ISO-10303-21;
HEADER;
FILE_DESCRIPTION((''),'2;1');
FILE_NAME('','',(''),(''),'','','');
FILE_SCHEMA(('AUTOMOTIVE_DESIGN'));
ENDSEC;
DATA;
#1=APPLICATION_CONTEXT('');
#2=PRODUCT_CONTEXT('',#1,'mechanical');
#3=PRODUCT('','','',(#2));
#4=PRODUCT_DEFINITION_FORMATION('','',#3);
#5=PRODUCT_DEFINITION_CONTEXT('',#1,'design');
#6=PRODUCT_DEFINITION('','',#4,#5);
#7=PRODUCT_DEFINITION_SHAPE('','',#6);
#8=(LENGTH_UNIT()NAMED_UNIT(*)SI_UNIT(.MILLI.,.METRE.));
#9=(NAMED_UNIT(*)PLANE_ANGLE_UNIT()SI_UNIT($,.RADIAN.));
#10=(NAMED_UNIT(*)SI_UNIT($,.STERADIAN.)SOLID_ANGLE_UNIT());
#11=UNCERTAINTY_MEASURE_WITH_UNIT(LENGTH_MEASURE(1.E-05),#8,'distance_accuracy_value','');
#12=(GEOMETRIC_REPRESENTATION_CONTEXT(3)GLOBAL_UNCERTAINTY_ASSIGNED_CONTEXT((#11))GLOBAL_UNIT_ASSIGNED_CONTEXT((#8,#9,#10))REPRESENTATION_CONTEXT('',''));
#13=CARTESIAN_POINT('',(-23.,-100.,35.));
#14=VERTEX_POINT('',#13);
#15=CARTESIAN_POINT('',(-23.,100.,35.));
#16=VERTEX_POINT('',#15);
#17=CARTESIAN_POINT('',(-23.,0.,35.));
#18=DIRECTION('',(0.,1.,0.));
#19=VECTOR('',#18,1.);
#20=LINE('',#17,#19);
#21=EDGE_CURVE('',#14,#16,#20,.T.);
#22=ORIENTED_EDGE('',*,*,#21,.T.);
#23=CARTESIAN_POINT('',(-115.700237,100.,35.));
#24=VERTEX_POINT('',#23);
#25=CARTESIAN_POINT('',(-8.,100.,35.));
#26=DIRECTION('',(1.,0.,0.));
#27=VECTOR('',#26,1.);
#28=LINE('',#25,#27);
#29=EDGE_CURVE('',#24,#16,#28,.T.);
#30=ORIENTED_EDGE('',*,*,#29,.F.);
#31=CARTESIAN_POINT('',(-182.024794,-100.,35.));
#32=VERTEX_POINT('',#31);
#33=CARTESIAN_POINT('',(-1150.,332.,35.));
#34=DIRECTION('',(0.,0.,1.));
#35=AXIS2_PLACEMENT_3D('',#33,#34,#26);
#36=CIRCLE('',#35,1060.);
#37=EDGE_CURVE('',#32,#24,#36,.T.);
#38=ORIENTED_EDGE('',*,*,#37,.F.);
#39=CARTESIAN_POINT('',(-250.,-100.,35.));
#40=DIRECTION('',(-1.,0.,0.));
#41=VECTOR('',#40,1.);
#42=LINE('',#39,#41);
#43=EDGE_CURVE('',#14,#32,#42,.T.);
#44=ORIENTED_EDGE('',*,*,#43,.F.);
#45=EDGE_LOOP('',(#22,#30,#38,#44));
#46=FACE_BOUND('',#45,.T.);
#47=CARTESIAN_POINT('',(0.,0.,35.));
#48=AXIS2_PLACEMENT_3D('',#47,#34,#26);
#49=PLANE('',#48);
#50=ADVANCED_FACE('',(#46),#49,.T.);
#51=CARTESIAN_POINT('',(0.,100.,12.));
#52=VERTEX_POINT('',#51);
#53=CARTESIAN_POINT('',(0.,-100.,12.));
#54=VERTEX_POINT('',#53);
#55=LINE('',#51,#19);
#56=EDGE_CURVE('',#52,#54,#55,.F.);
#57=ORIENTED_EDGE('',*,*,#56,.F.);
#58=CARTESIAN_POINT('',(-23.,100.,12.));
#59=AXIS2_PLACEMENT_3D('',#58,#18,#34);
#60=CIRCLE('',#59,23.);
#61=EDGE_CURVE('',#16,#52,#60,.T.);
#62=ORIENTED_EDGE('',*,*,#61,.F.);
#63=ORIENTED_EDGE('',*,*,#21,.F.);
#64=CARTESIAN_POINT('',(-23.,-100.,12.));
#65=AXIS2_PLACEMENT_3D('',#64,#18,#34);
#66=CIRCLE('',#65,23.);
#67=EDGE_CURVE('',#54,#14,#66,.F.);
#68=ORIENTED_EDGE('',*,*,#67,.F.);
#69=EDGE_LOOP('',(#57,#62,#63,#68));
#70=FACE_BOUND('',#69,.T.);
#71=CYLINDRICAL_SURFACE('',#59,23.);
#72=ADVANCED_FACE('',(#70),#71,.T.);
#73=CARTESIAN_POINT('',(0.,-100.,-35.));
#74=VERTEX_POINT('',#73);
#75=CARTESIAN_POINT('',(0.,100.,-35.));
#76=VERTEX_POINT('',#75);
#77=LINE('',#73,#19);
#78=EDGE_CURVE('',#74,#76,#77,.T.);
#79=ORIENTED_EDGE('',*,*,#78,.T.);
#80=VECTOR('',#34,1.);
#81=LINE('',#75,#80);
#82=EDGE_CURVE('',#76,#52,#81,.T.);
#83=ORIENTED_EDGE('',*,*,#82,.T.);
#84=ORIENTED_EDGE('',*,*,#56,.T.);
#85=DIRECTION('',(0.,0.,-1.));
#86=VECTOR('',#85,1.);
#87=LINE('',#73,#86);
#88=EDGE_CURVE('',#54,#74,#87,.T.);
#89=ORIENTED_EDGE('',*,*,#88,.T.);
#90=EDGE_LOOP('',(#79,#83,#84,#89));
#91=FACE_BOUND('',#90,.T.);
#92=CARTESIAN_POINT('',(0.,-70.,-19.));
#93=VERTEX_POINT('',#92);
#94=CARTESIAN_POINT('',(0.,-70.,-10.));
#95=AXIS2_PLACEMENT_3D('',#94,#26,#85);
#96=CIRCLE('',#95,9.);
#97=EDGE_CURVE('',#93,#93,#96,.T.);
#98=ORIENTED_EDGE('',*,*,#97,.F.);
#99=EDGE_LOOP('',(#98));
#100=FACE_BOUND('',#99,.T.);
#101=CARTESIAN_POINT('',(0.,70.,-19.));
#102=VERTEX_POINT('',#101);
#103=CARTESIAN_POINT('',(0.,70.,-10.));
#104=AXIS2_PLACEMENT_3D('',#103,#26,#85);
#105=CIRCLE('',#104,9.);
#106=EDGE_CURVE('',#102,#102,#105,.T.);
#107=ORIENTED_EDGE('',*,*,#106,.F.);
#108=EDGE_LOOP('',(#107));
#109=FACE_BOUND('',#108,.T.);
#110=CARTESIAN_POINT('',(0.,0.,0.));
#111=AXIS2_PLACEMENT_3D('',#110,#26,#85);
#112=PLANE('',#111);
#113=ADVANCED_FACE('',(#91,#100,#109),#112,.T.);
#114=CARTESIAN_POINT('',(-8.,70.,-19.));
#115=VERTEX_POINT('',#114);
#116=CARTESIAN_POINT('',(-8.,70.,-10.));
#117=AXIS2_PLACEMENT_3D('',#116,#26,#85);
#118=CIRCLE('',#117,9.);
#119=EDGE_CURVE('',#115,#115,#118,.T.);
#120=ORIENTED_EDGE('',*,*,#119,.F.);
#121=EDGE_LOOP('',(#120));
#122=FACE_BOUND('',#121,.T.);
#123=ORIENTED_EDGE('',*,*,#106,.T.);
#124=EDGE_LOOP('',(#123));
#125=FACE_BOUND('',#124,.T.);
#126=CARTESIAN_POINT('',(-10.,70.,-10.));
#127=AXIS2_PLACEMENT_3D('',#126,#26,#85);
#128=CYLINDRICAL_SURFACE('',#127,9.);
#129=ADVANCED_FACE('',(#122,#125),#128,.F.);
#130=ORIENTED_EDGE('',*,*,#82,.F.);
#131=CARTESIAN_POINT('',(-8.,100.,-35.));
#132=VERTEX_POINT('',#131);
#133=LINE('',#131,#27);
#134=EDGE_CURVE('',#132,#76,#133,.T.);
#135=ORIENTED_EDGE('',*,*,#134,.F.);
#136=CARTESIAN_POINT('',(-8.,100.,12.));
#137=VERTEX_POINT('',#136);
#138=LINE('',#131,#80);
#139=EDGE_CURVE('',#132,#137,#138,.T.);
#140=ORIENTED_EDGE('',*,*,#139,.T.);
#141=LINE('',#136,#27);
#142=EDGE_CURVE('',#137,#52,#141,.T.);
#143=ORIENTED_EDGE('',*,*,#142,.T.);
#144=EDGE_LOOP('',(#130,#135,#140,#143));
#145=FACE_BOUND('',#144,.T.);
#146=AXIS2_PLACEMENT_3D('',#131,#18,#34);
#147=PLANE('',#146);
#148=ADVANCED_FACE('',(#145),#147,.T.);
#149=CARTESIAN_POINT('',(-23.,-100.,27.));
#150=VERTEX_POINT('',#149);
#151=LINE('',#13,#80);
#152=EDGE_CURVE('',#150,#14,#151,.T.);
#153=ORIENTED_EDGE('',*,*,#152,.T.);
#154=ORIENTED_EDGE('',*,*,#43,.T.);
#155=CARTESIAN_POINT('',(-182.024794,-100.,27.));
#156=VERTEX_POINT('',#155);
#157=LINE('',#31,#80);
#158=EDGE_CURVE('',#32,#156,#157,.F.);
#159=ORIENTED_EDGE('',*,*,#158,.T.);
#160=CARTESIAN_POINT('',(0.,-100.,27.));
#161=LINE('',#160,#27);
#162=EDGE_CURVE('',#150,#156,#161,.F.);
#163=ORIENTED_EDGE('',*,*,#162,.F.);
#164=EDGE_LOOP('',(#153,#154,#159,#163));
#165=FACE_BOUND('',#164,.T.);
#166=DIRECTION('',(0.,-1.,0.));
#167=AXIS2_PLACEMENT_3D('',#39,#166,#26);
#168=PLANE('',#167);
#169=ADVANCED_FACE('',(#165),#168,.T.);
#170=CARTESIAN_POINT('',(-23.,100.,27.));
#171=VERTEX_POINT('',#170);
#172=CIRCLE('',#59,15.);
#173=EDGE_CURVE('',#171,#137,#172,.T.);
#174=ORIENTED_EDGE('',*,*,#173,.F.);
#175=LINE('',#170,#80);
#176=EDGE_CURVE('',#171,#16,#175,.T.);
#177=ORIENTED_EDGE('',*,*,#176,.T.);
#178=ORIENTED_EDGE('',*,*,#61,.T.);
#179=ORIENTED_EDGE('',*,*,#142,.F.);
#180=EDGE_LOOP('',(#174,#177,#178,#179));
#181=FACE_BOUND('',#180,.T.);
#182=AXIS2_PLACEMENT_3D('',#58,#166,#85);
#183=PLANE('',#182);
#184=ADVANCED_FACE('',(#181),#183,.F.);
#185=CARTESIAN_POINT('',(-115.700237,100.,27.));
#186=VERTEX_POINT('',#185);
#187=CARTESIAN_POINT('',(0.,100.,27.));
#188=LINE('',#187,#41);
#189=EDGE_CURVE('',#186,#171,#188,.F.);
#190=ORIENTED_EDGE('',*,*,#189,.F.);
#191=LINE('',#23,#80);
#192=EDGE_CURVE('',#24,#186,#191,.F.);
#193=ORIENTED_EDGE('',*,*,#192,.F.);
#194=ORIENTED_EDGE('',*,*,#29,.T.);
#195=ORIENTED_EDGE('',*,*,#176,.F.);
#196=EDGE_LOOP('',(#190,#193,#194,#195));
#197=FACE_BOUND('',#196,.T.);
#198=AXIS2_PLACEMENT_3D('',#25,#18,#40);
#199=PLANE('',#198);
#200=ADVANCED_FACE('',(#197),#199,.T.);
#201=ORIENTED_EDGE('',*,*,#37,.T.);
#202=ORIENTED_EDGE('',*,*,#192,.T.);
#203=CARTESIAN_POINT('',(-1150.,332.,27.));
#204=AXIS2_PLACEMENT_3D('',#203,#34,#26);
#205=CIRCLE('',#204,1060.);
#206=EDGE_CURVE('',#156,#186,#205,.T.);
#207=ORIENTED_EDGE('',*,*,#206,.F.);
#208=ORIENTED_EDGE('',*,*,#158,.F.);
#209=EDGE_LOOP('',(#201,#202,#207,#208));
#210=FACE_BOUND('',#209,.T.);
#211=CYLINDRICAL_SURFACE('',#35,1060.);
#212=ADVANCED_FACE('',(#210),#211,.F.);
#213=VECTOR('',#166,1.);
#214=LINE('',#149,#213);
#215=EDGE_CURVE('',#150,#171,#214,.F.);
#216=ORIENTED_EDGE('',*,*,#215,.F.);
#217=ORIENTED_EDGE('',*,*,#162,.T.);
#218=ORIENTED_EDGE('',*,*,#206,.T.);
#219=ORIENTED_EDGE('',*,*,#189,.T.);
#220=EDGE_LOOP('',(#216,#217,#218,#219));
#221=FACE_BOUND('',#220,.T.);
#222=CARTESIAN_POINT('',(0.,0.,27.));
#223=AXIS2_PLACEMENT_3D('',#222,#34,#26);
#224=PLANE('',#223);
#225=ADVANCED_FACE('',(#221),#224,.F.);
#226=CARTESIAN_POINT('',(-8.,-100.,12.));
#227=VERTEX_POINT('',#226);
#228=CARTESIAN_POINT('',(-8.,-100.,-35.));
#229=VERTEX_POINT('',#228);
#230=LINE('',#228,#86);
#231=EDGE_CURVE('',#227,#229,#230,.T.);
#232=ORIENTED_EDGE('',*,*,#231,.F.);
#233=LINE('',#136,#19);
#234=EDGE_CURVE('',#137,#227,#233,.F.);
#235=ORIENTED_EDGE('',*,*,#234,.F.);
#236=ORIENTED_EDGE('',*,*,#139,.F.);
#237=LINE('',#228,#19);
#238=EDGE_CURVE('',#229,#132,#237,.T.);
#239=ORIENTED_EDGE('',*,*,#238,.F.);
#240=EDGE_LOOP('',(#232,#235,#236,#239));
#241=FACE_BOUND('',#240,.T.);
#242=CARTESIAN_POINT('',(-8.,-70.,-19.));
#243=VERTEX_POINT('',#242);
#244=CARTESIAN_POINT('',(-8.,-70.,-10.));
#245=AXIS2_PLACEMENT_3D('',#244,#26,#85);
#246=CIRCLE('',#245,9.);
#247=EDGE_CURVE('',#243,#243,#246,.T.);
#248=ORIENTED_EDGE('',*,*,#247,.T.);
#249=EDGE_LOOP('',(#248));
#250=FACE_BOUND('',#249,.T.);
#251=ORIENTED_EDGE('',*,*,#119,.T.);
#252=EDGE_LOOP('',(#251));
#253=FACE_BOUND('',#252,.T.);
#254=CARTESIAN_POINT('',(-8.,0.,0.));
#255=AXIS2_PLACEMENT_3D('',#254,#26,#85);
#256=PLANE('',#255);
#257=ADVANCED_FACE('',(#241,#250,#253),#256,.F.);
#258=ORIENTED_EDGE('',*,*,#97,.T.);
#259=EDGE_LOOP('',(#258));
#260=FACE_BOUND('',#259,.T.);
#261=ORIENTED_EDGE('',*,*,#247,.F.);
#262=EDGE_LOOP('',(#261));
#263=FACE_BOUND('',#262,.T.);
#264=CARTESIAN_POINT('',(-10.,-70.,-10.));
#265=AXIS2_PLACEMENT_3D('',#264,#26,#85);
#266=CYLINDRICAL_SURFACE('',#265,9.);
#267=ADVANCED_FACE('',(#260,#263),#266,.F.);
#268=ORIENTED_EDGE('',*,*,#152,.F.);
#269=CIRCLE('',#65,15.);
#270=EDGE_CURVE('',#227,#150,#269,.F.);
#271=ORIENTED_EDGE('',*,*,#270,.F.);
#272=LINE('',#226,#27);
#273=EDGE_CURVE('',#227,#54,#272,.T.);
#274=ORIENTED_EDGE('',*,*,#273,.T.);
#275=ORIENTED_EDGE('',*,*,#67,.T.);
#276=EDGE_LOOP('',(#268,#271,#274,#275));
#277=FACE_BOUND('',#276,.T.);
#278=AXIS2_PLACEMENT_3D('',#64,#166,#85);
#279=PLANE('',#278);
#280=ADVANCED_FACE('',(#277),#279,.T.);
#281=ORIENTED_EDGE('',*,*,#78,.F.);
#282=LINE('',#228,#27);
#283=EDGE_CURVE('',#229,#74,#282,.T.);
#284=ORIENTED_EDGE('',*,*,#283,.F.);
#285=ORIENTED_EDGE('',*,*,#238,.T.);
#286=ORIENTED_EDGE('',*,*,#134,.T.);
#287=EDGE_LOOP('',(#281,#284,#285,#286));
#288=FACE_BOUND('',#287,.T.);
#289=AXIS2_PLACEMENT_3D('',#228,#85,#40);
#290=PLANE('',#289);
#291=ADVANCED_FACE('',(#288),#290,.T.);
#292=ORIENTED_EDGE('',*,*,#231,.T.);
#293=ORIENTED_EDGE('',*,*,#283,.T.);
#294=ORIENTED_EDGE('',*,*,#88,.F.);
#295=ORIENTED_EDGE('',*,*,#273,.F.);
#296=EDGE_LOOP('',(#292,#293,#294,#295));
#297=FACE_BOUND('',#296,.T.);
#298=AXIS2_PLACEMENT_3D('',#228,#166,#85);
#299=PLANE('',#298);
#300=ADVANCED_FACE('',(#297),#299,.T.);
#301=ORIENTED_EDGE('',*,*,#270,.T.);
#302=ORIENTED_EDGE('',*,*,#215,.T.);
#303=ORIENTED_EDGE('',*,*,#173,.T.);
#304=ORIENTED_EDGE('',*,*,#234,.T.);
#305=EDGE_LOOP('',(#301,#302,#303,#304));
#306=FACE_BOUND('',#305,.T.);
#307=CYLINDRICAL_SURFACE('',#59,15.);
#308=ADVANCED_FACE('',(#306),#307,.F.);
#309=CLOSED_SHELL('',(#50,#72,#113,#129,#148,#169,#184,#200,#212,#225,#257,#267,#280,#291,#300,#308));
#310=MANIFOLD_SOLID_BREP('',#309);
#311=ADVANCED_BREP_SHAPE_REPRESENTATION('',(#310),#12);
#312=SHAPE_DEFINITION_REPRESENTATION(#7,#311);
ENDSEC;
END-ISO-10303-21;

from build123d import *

# Parameters (mm, degrees)
SKETCH1_W                    = 70
SKETCH1_H                    = 200
BASE_FLANGE1_DEPTH           = 8
EDGE_FLANGE1_STRIP_W         = 62
EDGE_FLANGE1_STRIP_H         = 8
EDGE_FLANGE1_STRIP_CUT_DEPTH = 200
EDGE_FLANGE1_DEPTH           = 200
SKETCH9_R                    = 1060
CUT_EXTRUDE1_DEPTH           = 10
SKETCH10_R                   = 9
CUT_EXTRUDE2_DEPTH           = 10


# Sheet-metal steps are written as plain solids
with BuildPart() as part:
    # Sketch1 → Base-Flange1 (new body)
    with BuildSketch(Plane(origin=(0, 0, 0), x_dir=(0, 0, -1), z_dir=(1, 0, 0))):
        Rectangle(SKETCH1_W, SKETCH1_H)
    extrude(amount=-BASE_FLANGE1_DEPTH)

    # Edge-Flange1 strip (across the edge) → Edge-Flange1 strip cut (cut)
    with BuildSketch(Plane(origin=(-8, -100, 35), x_dir=(0, 0, -1), z_dir=(0, 1, 0))):
        with Locations((-8, -4)):
            Rectangle(EDGE_FLANGE1_STRIP_W, EDGE_FLANGE1_STRIP_H)
    extrude(amount=EDGE_FLANGE1_STRIP_CUT_DEPTH, mode=Mode.SUBTRACT)

    # Edge-Flange1 section (across the edge) → Edge-Flange1 (add)
    with BuildSketch(Plane(origin=(-8, -100, 35), x_dir=(0, 0, -1), z_dir=(0, 1, 0))):
        with BuildLine():
            Line((0, 15), (0, 242))
            Line((0, 242), (8, 242))
            Line((8, 242), (8, 15))
            ThreePointArc((8, 15), (12.393398282, 4.393398282), (23, 0))
            Line((23, 0), (23, -8))
            ThreePointArc((23, -8), (6.736544033, -1.263455967), (0, 15))
        make_face()
    extrude(amount=EDGE_FLANGE1_DEPTH)

    # Sketch9 → Cut-Extrude1 (cut)
    with BuildSketch(Plane.XY.offset(35)):
        with Locations((-1150, 332)):
            Circle(SKETCH9_R)
    extrude(amount=-CUT_EXTRUDE1_DEPTH, mode=Mode.SUBTRACT)

    # Sketch10 → Cut-Extrude2 (cut)
    with BuildSketch(Plane(origin=(0, 0, 0), x_dir=(0, 0, -1), z_dir=(1, 0, 0))):
        with Locations((10, -70)):
            Circle(SKETCH10_R)
        with Locations((10, 70)):
            Circle(SKETCH10_R)
    extrude(amount=-CUT_EXTRUDE2_DEPTH, mode=Mode.SUBTRACT)


solid = part.part
